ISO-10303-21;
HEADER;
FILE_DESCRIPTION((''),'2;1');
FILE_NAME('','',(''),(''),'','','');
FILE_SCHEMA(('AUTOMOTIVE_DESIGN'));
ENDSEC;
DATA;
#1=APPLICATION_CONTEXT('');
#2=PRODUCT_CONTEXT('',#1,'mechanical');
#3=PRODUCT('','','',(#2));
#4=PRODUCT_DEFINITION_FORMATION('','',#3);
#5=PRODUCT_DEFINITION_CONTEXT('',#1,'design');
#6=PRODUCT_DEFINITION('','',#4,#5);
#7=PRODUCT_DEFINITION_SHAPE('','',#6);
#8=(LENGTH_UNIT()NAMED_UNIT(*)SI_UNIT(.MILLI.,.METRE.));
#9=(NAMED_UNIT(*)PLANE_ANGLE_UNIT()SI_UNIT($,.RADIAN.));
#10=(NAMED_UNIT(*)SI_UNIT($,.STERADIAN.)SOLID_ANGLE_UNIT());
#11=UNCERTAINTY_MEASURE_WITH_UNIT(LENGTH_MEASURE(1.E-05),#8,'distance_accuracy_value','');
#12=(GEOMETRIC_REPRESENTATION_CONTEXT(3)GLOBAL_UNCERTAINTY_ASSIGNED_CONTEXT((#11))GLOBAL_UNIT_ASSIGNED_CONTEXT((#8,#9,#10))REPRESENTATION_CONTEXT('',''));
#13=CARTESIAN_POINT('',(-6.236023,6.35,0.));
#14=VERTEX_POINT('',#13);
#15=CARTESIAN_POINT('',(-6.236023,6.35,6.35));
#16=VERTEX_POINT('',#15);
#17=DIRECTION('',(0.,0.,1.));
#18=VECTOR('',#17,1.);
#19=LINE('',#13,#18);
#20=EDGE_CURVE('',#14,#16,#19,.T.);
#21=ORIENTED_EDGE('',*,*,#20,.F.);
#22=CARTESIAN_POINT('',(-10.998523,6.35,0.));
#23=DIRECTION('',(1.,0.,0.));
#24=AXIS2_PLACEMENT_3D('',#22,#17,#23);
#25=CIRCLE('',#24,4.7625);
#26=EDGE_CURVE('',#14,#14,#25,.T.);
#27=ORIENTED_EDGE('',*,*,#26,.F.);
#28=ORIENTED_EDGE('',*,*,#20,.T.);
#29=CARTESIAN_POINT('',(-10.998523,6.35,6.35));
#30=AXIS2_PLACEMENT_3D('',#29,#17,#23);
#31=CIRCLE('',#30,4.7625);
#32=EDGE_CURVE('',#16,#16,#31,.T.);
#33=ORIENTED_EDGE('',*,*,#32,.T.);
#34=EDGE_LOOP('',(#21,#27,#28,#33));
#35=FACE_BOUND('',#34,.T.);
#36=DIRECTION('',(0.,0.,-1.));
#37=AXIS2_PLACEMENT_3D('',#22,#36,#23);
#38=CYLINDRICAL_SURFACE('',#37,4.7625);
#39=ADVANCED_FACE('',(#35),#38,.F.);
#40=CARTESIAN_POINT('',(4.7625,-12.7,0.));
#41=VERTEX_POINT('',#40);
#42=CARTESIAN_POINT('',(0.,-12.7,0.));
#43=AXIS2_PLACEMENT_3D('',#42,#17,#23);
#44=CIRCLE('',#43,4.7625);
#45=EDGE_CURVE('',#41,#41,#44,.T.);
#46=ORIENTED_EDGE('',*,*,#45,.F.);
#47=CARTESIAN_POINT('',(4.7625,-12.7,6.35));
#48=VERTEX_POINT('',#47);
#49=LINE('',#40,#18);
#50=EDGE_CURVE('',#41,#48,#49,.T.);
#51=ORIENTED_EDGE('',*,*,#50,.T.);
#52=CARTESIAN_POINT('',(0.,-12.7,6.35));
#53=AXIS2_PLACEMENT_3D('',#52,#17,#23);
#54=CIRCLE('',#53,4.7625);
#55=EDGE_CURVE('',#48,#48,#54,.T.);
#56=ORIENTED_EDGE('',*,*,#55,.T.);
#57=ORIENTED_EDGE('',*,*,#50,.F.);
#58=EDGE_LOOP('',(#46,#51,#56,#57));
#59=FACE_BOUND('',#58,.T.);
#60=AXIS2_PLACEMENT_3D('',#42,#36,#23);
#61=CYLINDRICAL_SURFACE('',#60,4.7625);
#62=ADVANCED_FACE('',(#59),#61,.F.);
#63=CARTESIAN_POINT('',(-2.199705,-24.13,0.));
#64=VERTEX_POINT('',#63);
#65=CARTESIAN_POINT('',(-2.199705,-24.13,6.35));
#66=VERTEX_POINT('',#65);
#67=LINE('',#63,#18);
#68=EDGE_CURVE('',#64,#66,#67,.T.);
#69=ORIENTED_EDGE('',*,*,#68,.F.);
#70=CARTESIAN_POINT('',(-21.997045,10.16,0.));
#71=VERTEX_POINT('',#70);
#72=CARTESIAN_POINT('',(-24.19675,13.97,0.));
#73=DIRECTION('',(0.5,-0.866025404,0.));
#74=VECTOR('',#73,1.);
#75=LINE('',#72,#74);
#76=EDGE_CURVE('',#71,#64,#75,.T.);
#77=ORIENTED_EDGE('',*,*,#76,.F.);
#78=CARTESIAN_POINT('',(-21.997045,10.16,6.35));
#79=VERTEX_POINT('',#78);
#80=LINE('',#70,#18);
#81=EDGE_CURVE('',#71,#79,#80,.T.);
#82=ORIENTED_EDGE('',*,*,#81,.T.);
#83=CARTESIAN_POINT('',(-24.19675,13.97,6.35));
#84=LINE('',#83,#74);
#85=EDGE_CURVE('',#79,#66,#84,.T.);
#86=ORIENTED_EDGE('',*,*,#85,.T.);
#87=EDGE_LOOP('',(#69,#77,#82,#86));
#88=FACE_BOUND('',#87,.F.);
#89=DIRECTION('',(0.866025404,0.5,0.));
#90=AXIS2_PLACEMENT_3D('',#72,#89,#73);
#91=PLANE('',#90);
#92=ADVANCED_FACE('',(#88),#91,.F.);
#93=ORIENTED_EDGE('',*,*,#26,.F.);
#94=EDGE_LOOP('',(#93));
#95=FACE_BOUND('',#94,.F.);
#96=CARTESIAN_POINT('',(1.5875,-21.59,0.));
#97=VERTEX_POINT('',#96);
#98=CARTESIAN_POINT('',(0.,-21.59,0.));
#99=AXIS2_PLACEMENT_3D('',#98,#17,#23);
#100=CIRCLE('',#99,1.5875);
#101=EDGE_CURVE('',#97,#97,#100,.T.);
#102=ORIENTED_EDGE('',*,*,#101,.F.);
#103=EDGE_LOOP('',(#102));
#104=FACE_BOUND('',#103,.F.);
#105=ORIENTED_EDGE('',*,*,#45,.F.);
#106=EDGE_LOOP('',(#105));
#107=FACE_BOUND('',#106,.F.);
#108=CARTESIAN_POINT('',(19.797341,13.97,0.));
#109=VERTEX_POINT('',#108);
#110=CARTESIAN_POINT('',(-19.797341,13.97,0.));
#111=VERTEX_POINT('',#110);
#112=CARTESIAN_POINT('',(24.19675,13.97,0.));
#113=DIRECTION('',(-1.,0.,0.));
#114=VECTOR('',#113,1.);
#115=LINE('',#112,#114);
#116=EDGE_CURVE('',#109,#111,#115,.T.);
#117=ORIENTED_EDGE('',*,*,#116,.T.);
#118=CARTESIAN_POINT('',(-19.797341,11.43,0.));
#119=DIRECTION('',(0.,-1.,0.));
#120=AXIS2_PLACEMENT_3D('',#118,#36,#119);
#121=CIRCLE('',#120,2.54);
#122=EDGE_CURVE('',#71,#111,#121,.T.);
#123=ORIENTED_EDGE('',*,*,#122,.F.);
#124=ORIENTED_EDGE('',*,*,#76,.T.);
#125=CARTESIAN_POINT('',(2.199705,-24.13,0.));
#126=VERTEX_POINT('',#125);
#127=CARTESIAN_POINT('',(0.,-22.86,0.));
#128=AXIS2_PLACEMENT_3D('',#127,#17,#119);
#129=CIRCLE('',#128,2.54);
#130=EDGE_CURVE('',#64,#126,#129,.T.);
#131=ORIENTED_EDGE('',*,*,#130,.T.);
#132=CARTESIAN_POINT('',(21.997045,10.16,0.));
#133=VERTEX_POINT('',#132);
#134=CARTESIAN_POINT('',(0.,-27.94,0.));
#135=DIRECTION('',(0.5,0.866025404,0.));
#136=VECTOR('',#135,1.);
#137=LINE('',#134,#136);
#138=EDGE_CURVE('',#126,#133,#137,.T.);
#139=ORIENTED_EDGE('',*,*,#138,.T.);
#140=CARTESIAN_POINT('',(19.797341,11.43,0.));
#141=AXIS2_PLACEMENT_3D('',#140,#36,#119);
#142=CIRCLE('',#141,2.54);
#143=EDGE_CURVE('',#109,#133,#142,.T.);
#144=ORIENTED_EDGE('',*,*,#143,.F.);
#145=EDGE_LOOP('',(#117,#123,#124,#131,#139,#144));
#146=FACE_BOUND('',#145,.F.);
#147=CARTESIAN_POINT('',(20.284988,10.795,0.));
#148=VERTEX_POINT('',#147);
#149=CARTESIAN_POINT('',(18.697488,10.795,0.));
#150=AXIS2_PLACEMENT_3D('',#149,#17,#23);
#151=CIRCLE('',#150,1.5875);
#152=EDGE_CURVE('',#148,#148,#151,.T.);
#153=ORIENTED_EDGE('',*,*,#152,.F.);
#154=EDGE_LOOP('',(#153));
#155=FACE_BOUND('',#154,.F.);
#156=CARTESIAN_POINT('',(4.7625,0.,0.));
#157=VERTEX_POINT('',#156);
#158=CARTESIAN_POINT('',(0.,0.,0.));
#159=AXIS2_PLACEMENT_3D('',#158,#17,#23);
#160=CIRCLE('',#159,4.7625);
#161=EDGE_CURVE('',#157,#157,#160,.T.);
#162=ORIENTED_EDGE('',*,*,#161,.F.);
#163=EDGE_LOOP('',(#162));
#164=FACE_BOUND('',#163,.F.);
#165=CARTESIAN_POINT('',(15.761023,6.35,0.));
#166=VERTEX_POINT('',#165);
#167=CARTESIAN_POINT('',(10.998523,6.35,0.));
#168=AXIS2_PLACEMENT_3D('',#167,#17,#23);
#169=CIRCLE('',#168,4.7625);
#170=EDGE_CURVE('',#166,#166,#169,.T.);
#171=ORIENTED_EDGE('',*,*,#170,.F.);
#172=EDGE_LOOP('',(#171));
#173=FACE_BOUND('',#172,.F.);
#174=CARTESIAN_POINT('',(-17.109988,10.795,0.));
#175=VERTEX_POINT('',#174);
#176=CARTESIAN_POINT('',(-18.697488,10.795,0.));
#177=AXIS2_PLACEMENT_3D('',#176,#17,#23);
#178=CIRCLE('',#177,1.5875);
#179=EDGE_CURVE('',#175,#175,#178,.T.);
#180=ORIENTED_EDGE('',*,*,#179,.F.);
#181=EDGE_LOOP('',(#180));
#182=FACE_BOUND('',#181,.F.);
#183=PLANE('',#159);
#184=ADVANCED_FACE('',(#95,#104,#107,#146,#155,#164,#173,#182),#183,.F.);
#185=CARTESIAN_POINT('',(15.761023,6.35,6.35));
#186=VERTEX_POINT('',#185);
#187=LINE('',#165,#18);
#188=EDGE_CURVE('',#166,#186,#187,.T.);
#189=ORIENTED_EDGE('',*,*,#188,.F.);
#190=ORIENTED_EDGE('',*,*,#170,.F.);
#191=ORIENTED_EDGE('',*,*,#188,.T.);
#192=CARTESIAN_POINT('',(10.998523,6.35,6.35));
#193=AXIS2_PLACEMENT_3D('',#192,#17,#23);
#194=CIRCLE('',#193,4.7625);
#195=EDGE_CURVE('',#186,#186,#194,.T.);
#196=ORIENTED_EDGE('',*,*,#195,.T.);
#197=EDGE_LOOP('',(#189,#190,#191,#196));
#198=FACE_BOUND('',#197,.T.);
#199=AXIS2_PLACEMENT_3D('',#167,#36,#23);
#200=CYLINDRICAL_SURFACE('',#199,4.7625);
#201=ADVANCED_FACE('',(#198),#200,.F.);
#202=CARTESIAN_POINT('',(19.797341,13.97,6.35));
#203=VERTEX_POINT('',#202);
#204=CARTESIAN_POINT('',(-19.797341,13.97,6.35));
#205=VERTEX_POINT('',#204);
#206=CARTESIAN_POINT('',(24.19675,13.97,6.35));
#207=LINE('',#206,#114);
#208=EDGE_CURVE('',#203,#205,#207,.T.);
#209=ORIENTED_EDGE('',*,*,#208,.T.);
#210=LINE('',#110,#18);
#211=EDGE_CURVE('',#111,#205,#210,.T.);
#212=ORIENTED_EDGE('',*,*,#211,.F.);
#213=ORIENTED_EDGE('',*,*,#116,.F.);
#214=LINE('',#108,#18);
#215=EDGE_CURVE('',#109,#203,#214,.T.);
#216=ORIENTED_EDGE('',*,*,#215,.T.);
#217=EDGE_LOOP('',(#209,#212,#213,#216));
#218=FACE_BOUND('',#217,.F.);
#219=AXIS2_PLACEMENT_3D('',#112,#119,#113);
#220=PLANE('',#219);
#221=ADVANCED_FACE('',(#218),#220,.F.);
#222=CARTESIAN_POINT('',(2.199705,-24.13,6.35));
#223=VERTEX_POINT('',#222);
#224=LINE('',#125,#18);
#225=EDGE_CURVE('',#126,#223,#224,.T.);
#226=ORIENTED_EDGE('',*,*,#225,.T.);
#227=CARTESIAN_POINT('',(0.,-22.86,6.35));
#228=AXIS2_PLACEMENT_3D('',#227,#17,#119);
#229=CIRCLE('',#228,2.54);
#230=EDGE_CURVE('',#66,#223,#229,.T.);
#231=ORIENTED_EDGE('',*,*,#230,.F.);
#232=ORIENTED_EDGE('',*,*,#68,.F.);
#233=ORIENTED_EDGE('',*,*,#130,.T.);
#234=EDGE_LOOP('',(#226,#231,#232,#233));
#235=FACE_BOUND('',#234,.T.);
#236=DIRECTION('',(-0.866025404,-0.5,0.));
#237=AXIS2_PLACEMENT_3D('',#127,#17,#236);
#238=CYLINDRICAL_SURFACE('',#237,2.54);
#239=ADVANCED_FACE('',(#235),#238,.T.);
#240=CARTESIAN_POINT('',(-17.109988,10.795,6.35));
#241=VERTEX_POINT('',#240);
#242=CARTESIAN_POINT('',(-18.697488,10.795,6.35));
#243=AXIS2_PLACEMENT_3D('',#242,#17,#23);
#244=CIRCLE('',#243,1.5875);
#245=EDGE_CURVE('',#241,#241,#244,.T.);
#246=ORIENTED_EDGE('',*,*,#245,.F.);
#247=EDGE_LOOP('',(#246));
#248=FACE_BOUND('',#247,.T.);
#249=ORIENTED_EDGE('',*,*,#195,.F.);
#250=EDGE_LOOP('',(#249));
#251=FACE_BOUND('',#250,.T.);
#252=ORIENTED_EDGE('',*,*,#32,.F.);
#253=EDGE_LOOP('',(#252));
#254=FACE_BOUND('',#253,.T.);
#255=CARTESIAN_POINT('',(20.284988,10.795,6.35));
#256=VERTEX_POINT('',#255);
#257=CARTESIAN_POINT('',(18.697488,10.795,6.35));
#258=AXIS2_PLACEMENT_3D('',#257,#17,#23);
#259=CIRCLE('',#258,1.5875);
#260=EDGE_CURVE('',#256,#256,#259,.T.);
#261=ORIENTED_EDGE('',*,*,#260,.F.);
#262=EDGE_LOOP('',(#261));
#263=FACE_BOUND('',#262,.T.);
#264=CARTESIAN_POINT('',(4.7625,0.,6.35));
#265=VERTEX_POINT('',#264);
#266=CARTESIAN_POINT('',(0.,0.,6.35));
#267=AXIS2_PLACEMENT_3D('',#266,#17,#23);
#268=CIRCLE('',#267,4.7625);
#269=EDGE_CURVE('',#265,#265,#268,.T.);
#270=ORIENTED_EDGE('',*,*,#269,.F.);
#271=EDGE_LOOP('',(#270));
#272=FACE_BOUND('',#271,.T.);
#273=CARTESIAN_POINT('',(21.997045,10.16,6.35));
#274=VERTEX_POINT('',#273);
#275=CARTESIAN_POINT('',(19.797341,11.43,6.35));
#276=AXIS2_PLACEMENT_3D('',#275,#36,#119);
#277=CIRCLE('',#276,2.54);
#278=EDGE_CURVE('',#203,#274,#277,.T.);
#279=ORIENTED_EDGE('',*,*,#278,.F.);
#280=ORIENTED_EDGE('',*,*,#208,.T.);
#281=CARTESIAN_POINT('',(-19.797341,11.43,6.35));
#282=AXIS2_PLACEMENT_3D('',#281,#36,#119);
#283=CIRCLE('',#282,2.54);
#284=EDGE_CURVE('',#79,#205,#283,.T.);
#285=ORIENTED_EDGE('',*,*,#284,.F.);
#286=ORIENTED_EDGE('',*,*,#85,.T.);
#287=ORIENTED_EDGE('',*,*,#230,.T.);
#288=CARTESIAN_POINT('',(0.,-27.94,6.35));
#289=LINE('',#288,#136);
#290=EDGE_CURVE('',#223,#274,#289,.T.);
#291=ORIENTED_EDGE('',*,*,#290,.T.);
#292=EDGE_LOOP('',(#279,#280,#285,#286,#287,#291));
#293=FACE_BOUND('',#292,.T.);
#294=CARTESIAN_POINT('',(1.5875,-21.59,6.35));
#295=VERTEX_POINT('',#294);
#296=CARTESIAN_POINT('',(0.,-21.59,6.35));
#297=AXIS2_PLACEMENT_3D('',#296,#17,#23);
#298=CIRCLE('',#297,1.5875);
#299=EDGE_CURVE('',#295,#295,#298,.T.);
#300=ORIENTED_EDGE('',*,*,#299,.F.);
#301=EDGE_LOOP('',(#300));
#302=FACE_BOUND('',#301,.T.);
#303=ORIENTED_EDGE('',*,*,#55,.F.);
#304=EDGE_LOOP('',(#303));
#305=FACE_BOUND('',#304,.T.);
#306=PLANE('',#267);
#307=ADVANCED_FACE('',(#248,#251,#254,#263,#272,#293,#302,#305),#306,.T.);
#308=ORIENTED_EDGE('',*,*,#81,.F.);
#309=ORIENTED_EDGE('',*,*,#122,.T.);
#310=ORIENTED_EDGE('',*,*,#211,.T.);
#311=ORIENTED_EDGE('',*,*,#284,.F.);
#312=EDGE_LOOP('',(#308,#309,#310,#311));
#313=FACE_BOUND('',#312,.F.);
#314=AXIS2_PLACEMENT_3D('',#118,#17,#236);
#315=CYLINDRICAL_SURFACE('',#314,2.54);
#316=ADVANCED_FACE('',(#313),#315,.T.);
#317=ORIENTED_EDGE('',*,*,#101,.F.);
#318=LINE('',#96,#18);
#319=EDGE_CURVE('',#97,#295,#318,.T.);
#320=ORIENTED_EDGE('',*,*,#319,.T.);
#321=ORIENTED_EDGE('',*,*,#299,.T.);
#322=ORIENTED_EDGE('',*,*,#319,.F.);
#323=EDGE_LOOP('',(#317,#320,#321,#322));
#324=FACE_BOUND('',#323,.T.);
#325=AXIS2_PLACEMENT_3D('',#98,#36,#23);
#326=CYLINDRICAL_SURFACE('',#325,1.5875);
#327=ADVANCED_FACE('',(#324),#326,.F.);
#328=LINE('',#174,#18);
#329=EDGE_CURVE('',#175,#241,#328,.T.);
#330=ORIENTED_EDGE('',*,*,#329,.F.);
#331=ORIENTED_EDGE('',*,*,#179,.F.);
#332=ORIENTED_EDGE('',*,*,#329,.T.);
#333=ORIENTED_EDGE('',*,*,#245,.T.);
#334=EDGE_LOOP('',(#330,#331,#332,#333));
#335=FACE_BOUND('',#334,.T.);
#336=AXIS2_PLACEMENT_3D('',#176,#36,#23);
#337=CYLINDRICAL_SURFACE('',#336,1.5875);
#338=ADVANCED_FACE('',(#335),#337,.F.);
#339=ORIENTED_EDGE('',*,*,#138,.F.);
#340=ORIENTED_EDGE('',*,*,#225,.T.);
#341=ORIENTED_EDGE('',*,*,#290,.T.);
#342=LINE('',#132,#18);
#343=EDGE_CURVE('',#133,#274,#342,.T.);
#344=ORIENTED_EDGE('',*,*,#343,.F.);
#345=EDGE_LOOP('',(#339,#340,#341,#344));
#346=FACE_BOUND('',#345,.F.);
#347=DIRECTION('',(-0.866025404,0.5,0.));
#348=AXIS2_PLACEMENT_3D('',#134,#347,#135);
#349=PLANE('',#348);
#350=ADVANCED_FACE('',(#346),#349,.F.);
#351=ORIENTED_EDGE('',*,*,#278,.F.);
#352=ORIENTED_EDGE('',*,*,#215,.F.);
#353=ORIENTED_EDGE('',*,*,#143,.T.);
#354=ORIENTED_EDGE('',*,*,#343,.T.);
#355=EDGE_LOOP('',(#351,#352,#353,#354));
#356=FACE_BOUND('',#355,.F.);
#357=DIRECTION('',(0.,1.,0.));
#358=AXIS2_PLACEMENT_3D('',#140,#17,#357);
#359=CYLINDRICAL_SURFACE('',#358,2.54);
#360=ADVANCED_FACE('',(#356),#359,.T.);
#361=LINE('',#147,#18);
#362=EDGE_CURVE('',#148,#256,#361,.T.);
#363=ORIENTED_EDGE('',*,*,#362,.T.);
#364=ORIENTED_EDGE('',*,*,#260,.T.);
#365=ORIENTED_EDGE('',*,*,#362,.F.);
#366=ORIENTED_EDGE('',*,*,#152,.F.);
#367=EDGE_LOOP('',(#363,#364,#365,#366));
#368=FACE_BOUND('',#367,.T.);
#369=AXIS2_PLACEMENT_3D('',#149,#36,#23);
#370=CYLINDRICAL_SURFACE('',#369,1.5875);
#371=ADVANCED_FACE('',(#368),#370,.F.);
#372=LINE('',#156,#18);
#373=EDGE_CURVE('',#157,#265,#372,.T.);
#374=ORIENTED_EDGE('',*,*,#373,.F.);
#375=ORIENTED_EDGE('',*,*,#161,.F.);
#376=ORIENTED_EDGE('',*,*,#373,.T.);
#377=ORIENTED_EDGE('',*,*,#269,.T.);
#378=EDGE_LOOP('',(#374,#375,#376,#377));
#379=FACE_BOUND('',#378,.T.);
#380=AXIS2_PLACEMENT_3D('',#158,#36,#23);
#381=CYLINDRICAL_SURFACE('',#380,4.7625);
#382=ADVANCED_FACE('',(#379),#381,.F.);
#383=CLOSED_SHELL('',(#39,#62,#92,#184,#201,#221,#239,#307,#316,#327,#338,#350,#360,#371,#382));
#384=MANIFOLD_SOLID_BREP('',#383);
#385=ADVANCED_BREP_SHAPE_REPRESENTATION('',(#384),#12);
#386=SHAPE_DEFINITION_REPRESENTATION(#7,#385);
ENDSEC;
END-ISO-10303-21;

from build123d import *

# Parameters (mm, degrees)
F0_R     = 1.5875
F0_R_2   = 4.7625
F1_DEPTH = 6.35
F2_R     = 2.54


# Not quite as in the source:
# - a length typed as a fraction of an inch, garbled in the dataset ("3 / 203.2 mm" for 3/8 in), is restored


with BuildPart() as f1:
    # F0 (on Top) → F1 (new body)
    with BuildSketch(Plane.XY):
        Polygon((-24.1967497817, 13.97), (0, -27.94), (24.1967497817, 13.97), align=None)
        with Locations((0, -21.59)):
            Circle(F0_R, mode=Mode.SUBTRACT)
        with Locations((0, -12.7)):
            Circle(F0_R_2, mode=Mode.SUBTRACT)
        Circle(F0_R_2, mode=Mode.SUBTRACT)
        with Locations((-18.6974884677, 10.795)):
            Circle(F0_R, mode=Mode.SUBTRACT)
        with Locations((-10.9985226281, 6.35)):
            Circle(F0_R_2, mode=Mode.SUBTRACT)
        with Locations((10.9985226281, 6.35)):
            Circle(F0_R_2, mode=Mode.SUBTRACT)
        with Locations((18.6974884677, 10.795)):
            Circle(F0_R, mode=Mode.SUBTRACT)
    extrude(amount=F1_DEPTH)

    # F2
    f2_edges = [f1.edges().sort_by_distance(p)[0] for p in [
        (-24.19675, 13.97, 3.175),
        (0, -27.94, 3.175),
        (24.19675, 13.97, 3.175),
    ]]
    fillet(f2_edges, radius=F2_R)


solid = f1.part
